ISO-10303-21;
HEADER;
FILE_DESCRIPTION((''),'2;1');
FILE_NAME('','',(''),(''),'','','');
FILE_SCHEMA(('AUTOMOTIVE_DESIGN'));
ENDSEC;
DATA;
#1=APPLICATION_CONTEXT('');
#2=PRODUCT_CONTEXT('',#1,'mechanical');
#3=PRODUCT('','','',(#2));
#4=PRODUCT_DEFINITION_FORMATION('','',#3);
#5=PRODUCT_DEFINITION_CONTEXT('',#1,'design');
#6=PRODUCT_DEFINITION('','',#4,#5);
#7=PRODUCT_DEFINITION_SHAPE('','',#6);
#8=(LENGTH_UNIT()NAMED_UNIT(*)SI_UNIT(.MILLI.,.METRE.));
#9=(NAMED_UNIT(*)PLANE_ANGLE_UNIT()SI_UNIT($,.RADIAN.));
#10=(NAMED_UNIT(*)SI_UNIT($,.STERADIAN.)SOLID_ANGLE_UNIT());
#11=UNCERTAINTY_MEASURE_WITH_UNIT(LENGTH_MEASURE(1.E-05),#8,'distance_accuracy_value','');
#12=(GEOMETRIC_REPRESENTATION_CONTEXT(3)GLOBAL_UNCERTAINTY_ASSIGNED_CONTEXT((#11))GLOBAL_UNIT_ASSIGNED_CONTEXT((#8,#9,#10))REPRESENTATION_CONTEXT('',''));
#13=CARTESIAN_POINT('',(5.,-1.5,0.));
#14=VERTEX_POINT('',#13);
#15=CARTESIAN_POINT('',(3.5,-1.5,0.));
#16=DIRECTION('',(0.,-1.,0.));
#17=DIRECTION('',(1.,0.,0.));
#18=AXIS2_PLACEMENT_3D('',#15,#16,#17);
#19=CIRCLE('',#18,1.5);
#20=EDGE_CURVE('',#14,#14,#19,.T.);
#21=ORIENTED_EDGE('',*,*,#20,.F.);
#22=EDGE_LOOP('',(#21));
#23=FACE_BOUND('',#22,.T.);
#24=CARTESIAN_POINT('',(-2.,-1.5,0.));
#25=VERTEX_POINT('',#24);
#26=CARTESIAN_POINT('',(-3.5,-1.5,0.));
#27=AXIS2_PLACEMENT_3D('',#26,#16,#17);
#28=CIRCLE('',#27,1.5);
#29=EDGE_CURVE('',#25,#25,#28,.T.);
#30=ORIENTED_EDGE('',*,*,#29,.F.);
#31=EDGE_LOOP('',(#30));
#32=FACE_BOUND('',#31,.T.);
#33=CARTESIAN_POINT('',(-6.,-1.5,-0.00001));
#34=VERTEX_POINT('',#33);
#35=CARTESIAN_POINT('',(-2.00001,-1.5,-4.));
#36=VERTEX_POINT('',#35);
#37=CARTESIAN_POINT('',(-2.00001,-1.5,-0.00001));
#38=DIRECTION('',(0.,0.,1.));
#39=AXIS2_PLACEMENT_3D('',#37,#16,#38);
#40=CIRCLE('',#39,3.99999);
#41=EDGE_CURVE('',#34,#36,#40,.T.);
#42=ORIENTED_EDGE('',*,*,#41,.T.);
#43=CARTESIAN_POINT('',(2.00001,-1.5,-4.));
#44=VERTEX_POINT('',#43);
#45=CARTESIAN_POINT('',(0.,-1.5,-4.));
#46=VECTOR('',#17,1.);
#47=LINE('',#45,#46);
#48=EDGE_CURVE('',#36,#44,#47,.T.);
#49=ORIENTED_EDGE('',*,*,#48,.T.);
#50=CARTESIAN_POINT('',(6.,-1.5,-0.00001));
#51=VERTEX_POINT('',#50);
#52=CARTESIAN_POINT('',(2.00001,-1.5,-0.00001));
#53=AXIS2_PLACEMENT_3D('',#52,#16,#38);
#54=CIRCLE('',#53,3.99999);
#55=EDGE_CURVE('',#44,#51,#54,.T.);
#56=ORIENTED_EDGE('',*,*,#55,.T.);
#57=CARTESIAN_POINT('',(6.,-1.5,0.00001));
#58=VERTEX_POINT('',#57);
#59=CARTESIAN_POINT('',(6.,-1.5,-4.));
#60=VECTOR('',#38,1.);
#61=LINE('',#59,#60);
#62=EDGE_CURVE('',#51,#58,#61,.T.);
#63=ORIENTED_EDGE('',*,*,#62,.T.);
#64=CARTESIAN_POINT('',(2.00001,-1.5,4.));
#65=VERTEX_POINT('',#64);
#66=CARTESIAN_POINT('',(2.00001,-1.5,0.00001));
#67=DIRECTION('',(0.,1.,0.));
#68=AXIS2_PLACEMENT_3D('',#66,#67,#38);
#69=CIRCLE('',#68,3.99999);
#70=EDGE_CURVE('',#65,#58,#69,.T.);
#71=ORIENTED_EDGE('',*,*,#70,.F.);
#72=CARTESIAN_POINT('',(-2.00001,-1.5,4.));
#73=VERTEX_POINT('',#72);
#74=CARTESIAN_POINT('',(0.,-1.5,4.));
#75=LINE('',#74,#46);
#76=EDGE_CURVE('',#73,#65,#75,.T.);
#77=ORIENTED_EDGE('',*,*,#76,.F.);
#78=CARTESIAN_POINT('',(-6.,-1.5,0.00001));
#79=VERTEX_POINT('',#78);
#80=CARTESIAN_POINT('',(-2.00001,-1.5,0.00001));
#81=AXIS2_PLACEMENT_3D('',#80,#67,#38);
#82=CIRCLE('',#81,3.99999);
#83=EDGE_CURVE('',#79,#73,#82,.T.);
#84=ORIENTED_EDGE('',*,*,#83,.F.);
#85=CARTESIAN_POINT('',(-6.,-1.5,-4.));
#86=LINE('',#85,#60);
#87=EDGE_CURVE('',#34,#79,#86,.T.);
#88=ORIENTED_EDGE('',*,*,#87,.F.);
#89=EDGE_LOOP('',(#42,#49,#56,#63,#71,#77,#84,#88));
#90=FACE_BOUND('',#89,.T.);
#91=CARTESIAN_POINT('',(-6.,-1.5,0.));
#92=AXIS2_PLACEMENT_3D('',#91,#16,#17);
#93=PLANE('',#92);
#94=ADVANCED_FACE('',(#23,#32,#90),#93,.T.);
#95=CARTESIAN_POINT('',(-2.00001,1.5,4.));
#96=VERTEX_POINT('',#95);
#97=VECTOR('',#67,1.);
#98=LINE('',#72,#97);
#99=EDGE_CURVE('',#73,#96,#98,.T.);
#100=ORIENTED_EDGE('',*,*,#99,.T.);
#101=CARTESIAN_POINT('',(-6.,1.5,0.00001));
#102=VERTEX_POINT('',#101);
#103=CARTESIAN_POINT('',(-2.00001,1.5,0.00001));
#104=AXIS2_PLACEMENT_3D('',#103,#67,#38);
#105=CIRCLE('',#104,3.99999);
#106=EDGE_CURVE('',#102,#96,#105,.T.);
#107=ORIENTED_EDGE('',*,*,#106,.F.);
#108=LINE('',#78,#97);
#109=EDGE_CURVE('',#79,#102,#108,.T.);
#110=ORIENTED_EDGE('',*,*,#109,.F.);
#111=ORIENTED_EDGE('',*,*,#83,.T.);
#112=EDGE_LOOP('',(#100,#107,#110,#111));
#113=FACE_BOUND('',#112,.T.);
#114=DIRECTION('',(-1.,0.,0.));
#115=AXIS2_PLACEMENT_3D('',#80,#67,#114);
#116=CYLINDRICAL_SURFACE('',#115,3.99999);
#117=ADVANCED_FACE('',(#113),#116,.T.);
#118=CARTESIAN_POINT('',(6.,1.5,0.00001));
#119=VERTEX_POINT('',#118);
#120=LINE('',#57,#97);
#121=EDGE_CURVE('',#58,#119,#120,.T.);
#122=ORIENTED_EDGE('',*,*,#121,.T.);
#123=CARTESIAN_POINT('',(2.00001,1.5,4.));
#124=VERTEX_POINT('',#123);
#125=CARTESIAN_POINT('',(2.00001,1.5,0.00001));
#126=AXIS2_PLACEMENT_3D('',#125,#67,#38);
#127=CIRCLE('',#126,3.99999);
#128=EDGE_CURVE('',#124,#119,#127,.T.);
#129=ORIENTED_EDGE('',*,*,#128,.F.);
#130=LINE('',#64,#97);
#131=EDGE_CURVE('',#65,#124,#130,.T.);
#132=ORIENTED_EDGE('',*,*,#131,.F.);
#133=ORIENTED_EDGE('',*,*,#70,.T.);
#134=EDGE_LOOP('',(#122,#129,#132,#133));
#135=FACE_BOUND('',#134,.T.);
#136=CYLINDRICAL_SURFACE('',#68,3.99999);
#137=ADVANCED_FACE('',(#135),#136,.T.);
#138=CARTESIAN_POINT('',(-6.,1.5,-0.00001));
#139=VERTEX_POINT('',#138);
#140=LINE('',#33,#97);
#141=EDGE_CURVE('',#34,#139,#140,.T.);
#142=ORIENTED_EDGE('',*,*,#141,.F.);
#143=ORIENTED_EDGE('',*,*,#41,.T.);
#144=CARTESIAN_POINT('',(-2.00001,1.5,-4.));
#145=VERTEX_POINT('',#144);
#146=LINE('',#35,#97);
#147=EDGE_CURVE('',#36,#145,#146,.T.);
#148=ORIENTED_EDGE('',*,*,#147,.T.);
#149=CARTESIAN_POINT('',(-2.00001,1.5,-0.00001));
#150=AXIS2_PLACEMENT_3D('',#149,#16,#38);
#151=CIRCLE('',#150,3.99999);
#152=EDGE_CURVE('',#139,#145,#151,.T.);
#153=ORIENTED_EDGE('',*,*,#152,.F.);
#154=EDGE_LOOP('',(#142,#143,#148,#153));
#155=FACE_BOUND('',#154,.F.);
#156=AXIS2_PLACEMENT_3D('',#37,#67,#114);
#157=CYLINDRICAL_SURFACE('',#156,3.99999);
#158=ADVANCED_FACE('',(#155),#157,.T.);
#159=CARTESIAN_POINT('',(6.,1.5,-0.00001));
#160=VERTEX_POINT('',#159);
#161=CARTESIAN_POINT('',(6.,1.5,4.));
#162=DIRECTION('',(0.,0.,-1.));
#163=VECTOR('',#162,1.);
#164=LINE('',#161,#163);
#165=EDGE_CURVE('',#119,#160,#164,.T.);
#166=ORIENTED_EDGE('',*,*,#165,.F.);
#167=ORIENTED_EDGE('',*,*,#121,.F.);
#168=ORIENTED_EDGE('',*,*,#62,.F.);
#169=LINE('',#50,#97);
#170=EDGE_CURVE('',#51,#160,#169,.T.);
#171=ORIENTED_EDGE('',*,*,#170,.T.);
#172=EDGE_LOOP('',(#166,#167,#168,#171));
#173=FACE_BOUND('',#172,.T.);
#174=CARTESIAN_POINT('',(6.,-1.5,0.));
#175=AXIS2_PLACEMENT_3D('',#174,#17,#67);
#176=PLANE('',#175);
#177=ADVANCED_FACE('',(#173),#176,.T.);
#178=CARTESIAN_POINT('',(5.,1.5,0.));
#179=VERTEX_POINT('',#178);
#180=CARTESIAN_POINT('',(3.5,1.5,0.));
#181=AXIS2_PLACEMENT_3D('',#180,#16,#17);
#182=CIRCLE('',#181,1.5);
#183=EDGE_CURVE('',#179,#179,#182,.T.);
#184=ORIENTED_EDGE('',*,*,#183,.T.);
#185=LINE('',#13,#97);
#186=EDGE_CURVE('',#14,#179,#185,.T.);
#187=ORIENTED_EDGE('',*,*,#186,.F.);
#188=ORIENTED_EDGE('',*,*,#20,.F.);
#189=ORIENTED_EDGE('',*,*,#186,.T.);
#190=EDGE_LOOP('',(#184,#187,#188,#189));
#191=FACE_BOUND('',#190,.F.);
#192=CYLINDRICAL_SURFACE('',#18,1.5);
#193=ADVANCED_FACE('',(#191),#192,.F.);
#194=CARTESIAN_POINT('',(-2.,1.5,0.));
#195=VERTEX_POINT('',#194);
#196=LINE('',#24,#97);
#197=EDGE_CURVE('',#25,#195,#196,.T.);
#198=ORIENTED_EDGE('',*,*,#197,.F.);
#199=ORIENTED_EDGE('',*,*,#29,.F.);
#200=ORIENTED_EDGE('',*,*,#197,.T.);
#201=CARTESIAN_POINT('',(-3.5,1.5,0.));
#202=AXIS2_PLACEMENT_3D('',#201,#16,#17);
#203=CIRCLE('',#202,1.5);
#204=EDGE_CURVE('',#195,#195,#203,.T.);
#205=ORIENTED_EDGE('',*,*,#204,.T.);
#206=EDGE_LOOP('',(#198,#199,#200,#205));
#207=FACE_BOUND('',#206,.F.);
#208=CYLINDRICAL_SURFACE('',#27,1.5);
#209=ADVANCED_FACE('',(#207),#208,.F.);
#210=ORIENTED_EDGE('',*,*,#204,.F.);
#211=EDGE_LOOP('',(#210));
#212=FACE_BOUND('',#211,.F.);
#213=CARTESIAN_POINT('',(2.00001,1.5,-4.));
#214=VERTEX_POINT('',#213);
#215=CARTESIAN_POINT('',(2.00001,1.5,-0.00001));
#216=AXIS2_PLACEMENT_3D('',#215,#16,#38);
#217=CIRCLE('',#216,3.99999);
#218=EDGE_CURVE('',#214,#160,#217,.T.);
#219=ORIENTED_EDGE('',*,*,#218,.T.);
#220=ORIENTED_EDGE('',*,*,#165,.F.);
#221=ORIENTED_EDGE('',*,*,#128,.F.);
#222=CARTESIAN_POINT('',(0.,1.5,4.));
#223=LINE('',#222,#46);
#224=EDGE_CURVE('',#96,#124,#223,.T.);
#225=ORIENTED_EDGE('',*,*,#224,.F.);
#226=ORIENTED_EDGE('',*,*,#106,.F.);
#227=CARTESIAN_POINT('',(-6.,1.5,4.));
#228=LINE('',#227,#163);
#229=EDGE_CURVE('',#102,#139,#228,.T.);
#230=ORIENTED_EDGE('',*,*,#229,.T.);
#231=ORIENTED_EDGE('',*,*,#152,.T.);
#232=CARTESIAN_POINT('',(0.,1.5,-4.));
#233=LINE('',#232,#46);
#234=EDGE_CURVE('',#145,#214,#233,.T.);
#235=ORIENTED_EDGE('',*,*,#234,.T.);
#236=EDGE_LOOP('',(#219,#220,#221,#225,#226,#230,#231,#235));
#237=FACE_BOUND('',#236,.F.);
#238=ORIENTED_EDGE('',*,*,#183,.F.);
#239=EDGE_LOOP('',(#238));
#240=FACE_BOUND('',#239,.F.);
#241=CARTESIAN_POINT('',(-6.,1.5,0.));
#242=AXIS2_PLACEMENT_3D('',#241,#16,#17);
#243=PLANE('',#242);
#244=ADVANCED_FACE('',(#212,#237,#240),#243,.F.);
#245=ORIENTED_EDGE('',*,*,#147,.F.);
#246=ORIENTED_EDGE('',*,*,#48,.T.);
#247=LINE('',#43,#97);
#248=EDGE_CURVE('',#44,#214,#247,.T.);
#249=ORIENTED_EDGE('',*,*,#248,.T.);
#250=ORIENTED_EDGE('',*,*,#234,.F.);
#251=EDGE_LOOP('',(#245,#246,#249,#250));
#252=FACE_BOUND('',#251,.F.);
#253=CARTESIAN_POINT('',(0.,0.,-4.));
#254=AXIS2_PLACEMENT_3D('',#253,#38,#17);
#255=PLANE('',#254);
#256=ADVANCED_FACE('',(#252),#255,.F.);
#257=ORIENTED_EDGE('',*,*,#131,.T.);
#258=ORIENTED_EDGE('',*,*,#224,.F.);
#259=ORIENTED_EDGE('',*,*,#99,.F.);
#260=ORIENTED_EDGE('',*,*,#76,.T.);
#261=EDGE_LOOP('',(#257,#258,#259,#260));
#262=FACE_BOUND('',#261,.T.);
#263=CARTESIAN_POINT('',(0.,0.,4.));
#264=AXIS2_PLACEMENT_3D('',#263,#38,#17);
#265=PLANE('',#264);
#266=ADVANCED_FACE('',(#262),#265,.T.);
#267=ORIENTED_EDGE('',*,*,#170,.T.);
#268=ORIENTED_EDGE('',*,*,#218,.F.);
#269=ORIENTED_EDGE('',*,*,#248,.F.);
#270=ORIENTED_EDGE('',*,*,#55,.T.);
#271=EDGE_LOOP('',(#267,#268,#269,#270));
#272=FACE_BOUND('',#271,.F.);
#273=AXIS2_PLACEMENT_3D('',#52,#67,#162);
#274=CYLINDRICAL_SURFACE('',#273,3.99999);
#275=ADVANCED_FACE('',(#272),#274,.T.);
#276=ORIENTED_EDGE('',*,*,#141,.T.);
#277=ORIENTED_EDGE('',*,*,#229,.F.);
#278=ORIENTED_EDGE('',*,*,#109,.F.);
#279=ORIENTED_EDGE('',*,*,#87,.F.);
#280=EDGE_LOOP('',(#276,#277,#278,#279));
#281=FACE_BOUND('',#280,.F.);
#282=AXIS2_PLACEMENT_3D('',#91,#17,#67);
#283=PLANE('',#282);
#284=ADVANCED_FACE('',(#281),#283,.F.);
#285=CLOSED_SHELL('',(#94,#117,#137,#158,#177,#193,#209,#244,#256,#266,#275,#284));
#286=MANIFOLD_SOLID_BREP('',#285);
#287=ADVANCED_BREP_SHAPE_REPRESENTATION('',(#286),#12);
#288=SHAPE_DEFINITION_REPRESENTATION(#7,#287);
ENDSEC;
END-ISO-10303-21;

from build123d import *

# Parameters (mm, degrees)
F0_W     = 12
F0_H     = 3
F1_DEPTH = 4
F2_R     = 1.5
F3_DEPTH = 25
F4_R     = 3.99999


# Not quite as in the source:
# - a fillet or chamfer is up to 0.001 mm smaller than in the source, because OpenCascade refuses the exact size


with BuildPart() as f1:
    # F0 (on Top) → F1 (new body, symmetric)
    with BuildSketch(Plane.XY):
        Rectangle(F0_W, F0_H)
    extrude(amount=F1_DEPTH, both=True)

    # F2 (on face) → F3 (cut)
    with BuildSketch(Plane.XZ.offset(1.5)):
        with Locations((-3.5, 0)):
            Circle(F2_R)
        with Locations((3.5, 0)):
            Circle(F2_R)
    extrude(amount=-F3_DEPTH, mode=Mode.SUBTRACT)

    # F4 (radius 4 in the source; OpenCascade refuses exactly that, so slightly less here)
    f4_edges = [f1.edges().sort_by_distance(p)[0] for p in [
        (-6, 0, 4),
        (-6, 0, -4),
        (6, 0, 4),
        (6, 0, -4),
    ]]
    fillet(f4_edges, radius=F4_R)


solid = f1.part
